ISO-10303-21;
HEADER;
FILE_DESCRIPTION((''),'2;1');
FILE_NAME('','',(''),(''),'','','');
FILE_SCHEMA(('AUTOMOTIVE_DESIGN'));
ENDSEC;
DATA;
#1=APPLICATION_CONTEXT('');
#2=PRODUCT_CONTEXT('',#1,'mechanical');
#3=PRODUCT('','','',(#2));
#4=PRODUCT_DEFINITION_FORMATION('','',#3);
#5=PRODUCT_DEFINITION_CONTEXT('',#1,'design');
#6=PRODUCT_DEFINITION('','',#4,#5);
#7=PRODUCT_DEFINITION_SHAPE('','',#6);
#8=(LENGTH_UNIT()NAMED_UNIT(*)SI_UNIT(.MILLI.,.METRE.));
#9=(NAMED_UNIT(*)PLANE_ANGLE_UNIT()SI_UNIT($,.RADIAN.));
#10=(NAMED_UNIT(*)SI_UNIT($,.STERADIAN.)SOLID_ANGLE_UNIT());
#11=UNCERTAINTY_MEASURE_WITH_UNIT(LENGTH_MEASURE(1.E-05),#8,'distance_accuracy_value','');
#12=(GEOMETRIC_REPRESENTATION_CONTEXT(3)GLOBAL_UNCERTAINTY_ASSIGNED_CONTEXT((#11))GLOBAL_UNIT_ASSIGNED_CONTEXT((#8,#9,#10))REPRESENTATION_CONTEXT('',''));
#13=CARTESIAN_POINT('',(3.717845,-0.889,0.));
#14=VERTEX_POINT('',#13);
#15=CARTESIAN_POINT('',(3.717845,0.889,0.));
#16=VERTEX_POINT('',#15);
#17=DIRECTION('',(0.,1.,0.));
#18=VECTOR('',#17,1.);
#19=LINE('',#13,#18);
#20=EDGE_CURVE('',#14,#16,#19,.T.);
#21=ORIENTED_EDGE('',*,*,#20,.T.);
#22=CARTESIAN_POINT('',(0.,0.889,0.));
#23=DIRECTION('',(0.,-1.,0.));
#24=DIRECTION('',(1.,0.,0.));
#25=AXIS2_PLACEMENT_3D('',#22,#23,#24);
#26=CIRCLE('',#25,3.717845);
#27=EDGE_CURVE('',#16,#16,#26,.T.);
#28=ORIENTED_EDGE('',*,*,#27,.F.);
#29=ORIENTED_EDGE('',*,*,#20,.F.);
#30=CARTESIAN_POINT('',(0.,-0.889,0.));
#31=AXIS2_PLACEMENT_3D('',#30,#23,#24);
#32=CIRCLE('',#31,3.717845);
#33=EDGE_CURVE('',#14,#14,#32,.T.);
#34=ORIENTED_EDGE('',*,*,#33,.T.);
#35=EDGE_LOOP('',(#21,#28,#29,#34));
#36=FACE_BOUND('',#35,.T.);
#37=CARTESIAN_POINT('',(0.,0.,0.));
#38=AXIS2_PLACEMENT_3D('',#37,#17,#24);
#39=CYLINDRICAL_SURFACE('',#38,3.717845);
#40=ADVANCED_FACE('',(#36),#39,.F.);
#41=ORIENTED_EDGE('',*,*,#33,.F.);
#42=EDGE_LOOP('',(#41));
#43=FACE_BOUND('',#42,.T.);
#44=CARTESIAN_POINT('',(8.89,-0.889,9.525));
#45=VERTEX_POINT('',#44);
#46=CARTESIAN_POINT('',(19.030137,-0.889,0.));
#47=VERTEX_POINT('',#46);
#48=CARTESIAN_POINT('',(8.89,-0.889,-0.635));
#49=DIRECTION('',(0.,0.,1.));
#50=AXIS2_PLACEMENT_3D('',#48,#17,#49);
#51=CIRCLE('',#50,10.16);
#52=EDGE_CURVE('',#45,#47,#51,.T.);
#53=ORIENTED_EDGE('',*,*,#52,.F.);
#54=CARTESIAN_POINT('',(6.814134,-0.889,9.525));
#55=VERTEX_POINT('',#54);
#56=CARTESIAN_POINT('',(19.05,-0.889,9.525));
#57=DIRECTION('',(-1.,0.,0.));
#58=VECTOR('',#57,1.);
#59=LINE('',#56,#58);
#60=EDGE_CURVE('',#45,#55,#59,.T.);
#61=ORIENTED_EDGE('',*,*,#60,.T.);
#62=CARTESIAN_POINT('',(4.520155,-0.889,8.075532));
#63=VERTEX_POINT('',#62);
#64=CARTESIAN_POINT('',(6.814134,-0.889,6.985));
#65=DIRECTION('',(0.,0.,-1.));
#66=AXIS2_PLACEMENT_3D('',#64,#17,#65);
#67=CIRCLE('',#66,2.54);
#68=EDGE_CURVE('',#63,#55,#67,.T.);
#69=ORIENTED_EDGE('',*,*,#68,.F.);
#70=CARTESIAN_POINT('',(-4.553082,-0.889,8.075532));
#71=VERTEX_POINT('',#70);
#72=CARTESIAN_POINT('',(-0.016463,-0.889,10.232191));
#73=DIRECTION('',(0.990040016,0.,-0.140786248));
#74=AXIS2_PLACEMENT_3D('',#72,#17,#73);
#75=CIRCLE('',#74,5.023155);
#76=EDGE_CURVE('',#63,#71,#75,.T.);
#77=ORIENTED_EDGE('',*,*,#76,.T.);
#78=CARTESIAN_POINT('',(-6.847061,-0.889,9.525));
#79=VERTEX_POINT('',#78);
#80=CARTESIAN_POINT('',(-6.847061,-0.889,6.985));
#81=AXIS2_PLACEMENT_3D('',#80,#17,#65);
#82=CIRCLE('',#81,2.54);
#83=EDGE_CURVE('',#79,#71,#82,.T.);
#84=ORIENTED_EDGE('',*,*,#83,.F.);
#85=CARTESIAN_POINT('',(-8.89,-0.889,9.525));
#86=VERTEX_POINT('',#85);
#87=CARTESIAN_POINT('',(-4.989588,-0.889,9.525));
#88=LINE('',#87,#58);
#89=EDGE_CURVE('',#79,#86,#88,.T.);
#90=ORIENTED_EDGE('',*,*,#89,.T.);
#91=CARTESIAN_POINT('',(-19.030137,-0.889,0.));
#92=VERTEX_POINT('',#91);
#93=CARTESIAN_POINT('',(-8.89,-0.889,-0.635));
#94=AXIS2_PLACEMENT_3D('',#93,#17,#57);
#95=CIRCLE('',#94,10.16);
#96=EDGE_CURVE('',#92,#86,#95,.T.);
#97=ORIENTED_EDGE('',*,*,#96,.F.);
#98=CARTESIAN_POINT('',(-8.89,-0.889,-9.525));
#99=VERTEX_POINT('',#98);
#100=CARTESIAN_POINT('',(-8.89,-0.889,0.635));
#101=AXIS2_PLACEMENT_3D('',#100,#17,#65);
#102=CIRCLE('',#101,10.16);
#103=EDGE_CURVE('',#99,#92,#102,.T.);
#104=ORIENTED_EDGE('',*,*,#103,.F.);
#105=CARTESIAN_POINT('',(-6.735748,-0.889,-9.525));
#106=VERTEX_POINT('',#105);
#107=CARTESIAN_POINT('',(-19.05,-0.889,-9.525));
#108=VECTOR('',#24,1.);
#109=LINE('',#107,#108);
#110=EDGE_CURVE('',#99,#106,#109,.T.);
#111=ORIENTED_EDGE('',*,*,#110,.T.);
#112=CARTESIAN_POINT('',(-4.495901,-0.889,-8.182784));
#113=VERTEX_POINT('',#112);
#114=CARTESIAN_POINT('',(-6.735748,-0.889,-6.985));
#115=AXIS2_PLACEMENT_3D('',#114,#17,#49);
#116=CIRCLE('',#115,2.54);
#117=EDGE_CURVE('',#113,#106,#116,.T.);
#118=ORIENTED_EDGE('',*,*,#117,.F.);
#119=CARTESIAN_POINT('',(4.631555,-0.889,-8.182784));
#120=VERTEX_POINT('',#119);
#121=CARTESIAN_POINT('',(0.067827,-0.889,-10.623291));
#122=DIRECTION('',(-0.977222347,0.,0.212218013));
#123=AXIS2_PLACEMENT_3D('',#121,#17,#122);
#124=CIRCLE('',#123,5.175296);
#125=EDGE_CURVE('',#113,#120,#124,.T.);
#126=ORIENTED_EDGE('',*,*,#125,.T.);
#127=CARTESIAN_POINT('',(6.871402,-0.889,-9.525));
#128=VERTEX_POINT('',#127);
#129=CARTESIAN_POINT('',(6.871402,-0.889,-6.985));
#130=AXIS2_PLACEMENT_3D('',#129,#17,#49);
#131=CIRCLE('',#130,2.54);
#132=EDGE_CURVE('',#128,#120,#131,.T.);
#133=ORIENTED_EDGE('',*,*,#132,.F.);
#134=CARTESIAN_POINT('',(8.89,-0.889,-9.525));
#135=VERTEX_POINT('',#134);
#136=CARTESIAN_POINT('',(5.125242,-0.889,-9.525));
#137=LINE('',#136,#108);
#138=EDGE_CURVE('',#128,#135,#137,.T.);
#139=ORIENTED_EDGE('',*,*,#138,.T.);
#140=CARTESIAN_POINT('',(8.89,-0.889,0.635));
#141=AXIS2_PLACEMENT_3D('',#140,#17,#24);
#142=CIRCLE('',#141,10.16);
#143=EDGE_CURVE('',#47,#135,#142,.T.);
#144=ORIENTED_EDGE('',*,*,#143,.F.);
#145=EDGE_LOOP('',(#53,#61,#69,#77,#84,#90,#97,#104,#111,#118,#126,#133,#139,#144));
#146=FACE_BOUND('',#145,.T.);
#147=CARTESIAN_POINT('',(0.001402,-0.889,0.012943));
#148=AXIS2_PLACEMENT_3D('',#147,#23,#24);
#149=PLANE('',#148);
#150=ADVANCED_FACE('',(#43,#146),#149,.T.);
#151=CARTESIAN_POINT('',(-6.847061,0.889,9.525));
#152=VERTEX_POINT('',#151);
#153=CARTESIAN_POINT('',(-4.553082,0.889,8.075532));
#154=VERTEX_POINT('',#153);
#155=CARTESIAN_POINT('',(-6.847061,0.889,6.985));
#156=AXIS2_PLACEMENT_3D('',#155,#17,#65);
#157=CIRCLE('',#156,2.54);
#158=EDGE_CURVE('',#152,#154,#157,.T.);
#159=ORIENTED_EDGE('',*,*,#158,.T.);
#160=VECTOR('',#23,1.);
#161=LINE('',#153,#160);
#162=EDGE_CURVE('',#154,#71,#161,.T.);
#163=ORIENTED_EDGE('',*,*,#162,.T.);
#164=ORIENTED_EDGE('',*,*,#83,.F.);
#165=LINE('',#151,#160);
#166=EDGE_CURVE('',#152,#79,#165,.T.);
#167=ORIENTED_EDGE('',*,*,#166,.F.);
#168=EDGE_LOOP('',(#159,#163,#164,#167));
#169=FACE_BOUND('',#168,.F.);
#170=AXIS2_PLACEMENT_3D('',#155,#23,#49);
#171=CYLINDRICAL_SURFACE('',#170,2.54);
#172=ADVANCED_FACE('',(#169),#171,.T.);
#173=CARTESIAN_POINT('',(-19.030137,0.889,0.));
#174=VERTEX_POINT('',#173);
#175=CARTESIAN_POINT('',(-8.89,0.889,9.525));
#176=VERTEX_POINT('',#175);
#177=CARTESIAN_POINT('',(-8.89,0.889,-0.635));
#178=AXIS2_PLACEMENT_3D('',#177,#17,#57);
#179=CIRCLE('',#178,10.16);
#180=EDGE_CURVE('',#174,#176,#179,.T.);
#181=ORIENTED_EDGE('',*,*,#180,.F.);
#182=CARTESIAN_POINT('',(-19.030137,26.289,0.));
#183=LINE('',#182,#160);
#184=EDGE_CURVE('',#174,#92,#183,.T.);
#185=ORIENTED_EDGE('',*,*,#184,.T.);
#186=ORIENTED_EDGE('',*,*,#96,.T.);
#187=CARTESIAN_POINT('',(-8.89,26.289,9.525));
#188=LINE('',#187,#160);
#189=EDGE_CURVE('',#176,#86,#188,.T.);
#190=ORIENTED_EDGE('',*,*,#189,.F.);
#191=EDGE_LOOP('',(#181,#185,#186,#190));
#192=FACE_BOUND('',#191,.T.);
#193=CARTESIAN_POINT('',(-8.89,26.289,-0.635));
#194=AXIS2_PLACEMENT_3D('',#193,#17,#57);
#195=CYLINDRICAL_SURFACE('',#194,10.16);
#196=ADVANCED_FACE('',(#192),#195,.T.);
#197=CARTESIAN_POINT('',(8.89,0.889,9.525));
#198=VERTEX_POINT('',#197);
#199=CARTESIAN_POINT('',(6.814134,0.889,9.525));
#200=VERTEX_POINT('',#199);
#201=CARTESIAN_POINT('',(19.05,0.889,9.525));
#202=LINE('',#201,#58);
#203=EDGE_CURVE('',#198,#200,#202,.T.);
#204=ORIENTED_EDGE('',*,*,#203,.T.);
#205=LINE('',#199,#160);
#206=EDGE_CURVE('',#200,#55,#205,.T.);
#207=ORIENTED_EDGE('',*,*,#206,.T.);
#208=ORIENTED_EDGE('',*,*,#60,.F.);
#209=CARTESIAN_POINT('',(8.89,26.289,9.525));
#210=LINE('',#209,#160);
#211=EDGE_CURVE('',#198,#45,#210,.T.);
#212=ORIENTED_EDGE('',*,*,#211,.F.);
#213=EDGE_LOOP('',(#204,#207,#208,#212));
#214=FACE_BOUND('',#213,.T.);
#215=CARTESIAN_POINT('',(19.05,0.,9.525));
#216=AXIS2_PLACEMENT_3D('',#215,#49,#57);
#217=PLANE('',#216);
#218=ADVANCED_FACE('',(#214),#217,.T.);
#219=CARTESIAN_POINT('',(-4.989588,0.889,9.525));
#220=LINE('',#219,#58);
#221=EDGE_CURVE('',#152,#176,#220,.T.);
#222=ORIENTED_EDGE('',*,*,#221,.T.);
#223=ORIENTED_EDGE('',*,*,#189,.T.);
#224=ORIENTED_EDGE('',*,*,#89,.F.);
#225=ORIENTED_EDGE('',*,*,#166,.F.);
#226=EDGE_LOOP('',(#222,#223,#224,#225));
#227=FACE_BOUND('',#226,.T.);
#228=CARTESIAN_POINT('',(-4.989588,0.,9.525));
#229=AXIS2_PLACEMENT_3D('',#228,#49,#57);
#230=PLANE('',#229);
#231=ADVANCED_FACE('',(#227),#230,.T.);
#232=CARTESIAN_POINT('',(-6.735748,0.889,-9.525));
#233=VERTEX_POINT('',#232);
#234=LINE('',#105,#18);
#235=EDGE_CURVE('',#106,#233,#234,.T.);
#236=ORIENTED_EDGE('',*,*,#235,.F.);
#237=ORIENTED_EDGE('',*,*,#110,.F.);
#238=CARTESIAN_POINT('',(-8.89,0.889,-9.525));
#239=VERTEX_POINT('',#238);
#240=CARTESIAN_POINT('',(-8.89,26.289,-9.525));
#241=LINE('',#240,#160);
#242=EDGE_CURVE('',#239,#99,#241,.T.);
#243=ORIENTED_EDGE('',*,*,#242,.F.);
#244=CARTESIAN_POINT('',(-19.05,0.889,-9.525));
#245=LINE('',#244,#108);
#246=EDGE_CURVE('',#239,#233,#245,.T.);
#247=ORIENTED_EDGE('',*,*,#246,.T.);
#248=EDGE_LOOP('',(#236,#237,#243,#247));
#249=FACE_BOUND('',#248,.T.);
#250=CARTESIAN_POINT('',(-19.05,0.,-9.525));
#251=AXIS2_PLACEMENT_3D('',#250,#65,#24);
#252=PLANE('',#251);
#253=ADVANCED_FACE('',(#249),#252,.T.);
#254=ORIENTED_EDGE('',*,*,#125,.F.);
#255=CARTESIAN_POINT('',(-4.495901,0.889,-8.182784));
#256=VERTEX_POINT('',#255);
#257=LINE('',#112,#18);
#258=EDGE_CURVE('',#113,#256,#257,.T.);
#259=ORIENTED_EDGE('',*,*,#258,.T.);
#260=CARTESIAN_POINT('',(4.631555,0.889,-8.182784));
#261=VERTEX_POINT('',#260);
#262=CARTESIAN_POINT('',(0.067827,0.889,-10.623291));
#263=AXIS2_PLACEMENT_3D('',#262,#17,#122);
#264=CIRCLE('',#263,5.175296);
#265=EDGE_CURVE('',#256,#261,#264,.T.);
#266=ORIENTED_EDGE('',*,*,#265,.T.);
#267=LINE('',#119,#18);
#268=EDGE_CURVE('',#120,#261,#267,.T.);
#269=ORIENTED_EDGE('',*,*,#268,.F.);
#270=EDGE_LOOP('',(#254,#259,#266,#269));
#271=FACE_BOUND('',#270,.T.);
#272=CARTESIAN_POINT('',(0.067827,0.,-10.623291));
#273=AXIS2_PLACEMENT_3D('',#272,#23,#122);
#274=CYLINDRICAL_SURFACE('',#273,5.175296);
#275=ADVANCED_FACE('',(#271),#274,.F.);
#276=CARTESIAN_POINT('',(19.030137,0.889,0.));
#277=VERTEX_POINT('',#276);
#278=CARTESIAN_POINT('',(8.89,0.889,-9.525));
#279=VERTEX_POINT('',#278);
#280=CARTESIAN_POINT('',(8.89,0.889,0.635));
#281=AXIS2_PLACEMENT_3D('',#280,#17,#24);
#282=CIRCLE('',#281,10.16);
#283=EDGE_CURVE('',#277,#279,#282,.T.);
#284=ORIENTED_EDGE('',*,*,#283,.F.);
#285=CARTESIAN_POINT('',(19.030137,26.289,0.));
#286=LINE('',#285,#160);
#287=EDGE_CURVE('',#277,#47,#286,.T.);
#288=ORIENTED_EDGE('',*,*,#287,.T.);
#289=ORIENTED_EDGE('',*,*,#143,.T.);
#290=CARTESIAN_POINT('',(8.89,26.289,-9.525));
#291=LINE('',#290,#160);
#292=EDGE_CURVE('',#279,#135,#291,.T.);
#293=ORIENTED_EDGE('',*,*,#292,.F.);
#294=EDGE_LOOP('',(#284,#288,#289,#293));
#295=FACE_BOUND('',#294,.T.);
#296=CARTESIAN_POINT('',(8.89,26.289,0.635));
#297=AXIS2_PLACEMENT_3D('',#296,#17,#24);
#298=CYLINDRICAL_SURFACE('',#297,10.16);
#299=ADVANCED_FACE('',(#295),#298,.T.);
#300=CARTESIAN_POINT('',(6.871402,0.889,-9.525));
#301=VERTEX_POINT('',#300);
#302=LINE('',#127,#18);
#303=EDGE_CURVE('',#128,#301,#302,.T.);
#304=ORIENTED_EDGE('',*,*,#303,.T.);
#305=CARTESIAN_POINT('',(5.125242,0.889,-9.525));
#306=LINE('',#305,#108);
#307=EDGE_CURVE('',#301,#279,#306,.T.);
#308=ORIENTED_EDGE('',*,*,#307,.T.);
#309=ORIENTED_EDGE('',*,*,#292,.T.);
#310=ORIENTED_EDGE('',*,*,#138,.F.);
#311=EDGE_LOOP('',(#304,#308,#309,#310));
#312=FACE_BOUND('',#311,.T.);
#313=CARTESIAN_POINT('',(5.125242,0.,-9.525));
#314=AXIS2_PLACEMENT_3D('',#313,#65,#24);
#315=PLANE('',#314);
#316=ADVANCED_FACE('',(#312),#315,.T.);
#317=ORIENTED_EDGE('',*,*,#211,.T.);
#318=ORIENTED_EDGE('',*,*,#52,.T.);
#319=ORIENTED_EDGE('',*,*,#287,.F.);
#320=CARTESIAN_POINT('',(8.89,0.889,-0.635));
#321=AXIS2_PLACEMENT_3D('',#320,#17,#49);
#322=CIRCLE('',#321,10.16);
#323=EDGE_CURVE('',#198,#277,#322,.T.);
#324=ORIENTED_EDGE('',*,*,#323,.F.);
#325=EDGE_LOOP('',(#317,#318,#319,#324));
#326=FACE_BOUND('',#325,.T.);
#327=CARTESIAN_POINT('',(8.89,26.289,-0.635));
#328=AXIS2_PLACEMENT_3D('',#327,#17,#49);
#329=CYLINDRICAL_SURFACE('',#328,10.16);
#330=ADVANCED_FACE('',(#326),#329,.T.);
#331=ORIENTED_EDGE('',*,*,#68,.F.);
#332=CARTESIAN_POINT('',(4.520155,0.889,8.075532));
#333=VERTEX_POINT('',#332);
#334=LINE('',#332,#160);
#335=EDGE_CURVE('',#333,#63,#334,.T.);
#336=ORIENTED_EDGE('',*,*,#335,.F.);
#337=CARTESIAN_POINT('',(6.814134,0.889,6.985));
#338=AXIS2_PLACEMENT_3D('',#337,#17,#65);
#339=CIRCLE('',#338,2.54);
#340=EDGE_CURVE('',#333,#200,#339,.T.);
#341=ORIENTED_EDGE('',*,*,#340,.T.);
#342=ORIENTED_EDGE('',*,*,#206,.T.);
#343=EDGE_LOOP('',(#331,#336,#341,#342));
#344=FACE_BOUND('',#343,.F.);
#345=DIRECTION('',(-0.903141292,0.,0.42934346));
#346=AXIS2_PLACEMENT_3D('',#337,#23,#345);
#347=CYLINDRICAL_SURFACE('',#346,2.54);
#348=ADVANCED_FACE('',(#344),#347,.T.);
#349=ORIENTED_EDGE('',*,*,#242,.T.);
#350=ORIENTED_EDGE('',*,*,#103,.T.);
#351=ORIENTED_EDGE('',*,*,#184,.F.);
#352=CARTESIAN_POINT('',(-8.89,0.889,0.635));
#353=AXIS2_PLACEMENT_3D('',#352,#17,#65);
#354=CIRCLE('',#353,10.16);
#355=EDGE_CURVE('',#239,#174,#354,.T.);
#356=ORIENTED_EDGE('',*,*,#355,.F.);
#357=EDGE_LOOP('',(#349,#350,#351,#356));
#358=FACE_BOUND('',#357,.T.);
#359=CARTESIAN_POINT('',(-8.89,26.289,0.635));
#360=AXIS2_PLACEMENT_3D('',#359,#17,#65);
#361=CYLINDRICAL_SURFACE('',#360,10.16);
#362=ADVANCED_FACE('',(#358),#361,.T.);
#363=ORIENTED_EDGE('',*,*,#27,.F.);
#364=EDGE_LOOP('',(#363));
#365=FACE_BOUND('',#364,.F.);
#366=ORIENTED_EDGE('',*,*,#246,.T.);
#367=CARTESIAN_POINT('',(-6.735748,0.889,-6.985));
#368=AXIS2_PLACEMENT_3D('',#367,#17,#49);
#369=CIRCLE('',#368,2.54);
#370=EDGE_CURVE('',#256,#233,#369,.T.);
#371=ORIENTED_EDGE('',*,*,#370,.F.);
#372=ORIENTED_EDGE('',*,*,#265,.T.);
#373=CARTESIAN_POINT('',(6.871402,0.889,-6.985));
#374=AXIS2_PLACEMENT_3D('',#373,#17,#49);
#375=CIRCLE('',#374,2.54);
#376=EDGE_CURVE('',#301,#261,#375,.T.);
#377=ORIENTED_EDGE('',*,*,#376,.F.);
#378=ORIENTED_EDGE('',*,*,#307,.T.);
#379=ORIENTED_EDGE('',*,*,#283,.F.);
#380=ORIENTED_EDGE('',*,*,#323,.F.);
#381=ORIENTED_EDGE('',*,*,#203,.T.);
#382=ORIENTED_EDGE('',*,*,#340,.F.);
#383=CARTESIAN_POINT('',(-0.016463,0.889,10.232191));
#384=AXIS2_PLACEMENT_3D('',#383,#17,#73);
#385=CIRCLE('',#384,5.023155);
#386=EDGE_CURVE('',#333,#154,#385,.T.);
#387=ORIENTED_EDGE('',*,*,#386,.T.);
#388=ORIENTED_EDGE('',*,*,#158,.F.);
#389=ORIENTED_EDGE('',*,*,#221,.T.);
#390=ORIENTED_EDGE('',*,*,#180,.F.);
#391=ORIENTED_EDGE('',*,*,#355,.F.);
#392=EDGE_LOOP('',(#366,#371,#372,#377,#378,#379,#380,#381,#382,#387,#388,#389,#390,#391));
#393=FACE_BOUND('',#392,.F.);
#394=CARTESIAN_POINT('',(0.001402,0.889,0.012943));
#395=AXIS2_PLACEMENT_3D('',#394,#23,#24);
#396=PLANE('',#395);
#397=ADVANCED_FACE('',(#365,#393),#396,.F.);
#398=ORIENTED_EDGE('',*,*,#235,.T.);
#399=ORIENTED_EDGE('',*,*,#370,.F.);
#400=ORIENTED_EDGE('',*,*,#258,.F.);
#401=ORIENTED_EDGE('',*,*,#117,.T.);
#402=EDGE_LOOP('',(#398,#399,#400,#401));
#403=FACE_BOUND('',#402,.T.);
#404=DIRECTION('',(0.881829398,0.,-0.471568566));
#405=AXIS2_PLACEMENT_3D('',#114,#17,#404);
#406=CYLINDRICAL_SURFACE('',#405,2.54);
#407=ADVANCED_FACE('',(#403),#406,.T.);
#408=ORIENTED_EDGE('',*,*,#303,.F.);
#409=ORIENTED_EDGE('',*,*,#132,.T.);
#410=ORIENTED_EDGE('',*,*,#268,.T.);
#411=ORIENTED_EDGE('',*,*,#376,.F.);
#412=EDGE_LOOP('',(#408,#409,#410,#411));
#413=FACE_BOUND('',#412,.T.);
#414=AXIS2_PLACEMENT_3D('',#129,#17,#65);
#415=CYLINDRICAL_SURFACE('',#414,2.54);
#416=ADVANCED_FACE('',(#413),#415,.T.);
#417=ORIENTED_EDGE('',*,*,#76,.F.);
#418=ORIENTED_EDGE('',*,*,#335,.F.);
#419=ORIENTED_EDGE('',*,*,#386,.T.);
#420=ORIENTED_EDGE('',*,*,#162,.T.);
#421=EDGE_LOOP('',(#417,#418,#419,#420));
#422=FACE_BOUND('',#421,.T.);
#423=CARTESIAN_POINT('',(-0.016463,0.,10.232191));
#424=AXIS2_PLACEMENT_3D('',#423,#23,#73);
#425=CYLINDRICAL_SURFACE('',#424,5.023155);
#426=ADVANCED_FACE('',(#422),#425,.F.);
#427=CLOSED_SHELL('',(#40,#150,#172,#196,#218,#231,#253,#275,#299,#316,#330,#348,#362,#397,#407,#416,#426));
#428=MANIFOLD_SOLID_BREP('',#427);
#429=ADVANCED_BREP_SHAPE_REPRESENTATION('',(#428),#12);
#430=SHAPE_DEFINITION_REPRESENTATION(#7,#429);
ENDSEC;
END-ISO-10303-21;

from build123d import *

# Parameters (mm, degrees)
F0_R        = 3.7178453792
F1_DEPTH    = 0.889
F2_T1_DEPTH = 52.578
F3_R        = 2.54


# Not quite as in the source:
# - a fillet or chamfer that OpenCascade refuses, or shapes differently, is made with other operations: its cross-section is extruded or revolved along the edge and cut away or added


with BuildPart() as f1:
    # F0 (on Front) → F1 (new body, symmetric)
    with BuildSketch(Plane.XZ):
        with BuildLine():
            Line((19.05, -9.525), (19.05, 9.525))
            Line((19.05, 9.525), (4.9566612579, 9.525))
            ThreePointArc((4.9566612579, 9.525), (-0.016463222, 5.2090361219), (-4.9895877019, 9.525))
            Line((-4.9895877019, 9.525), (-19.05, 9.525))
            Line((-19.05, 9.525), (-19.05, -9.525))
            Line((-19.05, -9.525), (-4.9895877019, -9.525))
            ThreePointArc((-4.9895877019, -9.525), (0.067827059, -5.4479951467), (5.1252418198, -9.525))
            Line((5.1252418198, -9.525), (19.05, -9.525))
        make_face()
        Circle(F0_R, mode=Mode.SUBTRACT)
    extrude(amount=F1_DEPTH, both=True)

    # F2: fillet of radius 10.16 on 4 edges, made by hand

    # F2_s2 → F2_t1 (cut)
    with BuildSketch(Plane.XZ.offset(-26.289)):
        with BuildLine():
            ThreePointArc((-19.05, -0.635), (-16.0742048969, 6.5492048969), (-8.89, 9.525))
            Line((-8.89, 9.525), (-19.05, 9.525))
            Line((-19.05, 9.525), (-19.05, -0.635))
        make_face()
        with BuildLine():
            ThreePointArc((-8.89, -9.525), (-16.0742048969, -6.5492048969), (-19.05, 0.635))
            Line((-19.05, 0.635), (-19.05, -9.525))
            Line((-19.05, -9.525), (-8.89, -9.525))
        make_face()
        with BuildLine():
            ThreePointArc((8.89, 9.525), (16.0742048969, 6.5492048969), (19.05, -0.635))
            Line((19.05, -0.635), (19.05, 9.525))
            Line((19.05, 9.525), (8.89, 9.525))
        make_face()
        with BuildLine():
            ThreePointArc((19.05, 0.635), (16.0742048969, -6.5492048969), (8.89, -9.525))
            Line((8.89, -9.525), (19.05, -9.525))
            Line((19.05, -9.525), (19.05, 0.635))
        make_face()
    extrude(amount=F2_T1_DEPTH, mode=Mode.SUBTRACT)

    # F3
    f3_edges = [f1.edges().sort_by_distance(p)[0] for p in [
        (-4.989588, 0, 9.525),
        (5.125242, 0, -9.525),
        (-4.989588, 0, -9.525),
        (4.956661, 0, 9.525),
    ]]
    fillet(f3_edges, radius=F3_R)


solid = f1.part
